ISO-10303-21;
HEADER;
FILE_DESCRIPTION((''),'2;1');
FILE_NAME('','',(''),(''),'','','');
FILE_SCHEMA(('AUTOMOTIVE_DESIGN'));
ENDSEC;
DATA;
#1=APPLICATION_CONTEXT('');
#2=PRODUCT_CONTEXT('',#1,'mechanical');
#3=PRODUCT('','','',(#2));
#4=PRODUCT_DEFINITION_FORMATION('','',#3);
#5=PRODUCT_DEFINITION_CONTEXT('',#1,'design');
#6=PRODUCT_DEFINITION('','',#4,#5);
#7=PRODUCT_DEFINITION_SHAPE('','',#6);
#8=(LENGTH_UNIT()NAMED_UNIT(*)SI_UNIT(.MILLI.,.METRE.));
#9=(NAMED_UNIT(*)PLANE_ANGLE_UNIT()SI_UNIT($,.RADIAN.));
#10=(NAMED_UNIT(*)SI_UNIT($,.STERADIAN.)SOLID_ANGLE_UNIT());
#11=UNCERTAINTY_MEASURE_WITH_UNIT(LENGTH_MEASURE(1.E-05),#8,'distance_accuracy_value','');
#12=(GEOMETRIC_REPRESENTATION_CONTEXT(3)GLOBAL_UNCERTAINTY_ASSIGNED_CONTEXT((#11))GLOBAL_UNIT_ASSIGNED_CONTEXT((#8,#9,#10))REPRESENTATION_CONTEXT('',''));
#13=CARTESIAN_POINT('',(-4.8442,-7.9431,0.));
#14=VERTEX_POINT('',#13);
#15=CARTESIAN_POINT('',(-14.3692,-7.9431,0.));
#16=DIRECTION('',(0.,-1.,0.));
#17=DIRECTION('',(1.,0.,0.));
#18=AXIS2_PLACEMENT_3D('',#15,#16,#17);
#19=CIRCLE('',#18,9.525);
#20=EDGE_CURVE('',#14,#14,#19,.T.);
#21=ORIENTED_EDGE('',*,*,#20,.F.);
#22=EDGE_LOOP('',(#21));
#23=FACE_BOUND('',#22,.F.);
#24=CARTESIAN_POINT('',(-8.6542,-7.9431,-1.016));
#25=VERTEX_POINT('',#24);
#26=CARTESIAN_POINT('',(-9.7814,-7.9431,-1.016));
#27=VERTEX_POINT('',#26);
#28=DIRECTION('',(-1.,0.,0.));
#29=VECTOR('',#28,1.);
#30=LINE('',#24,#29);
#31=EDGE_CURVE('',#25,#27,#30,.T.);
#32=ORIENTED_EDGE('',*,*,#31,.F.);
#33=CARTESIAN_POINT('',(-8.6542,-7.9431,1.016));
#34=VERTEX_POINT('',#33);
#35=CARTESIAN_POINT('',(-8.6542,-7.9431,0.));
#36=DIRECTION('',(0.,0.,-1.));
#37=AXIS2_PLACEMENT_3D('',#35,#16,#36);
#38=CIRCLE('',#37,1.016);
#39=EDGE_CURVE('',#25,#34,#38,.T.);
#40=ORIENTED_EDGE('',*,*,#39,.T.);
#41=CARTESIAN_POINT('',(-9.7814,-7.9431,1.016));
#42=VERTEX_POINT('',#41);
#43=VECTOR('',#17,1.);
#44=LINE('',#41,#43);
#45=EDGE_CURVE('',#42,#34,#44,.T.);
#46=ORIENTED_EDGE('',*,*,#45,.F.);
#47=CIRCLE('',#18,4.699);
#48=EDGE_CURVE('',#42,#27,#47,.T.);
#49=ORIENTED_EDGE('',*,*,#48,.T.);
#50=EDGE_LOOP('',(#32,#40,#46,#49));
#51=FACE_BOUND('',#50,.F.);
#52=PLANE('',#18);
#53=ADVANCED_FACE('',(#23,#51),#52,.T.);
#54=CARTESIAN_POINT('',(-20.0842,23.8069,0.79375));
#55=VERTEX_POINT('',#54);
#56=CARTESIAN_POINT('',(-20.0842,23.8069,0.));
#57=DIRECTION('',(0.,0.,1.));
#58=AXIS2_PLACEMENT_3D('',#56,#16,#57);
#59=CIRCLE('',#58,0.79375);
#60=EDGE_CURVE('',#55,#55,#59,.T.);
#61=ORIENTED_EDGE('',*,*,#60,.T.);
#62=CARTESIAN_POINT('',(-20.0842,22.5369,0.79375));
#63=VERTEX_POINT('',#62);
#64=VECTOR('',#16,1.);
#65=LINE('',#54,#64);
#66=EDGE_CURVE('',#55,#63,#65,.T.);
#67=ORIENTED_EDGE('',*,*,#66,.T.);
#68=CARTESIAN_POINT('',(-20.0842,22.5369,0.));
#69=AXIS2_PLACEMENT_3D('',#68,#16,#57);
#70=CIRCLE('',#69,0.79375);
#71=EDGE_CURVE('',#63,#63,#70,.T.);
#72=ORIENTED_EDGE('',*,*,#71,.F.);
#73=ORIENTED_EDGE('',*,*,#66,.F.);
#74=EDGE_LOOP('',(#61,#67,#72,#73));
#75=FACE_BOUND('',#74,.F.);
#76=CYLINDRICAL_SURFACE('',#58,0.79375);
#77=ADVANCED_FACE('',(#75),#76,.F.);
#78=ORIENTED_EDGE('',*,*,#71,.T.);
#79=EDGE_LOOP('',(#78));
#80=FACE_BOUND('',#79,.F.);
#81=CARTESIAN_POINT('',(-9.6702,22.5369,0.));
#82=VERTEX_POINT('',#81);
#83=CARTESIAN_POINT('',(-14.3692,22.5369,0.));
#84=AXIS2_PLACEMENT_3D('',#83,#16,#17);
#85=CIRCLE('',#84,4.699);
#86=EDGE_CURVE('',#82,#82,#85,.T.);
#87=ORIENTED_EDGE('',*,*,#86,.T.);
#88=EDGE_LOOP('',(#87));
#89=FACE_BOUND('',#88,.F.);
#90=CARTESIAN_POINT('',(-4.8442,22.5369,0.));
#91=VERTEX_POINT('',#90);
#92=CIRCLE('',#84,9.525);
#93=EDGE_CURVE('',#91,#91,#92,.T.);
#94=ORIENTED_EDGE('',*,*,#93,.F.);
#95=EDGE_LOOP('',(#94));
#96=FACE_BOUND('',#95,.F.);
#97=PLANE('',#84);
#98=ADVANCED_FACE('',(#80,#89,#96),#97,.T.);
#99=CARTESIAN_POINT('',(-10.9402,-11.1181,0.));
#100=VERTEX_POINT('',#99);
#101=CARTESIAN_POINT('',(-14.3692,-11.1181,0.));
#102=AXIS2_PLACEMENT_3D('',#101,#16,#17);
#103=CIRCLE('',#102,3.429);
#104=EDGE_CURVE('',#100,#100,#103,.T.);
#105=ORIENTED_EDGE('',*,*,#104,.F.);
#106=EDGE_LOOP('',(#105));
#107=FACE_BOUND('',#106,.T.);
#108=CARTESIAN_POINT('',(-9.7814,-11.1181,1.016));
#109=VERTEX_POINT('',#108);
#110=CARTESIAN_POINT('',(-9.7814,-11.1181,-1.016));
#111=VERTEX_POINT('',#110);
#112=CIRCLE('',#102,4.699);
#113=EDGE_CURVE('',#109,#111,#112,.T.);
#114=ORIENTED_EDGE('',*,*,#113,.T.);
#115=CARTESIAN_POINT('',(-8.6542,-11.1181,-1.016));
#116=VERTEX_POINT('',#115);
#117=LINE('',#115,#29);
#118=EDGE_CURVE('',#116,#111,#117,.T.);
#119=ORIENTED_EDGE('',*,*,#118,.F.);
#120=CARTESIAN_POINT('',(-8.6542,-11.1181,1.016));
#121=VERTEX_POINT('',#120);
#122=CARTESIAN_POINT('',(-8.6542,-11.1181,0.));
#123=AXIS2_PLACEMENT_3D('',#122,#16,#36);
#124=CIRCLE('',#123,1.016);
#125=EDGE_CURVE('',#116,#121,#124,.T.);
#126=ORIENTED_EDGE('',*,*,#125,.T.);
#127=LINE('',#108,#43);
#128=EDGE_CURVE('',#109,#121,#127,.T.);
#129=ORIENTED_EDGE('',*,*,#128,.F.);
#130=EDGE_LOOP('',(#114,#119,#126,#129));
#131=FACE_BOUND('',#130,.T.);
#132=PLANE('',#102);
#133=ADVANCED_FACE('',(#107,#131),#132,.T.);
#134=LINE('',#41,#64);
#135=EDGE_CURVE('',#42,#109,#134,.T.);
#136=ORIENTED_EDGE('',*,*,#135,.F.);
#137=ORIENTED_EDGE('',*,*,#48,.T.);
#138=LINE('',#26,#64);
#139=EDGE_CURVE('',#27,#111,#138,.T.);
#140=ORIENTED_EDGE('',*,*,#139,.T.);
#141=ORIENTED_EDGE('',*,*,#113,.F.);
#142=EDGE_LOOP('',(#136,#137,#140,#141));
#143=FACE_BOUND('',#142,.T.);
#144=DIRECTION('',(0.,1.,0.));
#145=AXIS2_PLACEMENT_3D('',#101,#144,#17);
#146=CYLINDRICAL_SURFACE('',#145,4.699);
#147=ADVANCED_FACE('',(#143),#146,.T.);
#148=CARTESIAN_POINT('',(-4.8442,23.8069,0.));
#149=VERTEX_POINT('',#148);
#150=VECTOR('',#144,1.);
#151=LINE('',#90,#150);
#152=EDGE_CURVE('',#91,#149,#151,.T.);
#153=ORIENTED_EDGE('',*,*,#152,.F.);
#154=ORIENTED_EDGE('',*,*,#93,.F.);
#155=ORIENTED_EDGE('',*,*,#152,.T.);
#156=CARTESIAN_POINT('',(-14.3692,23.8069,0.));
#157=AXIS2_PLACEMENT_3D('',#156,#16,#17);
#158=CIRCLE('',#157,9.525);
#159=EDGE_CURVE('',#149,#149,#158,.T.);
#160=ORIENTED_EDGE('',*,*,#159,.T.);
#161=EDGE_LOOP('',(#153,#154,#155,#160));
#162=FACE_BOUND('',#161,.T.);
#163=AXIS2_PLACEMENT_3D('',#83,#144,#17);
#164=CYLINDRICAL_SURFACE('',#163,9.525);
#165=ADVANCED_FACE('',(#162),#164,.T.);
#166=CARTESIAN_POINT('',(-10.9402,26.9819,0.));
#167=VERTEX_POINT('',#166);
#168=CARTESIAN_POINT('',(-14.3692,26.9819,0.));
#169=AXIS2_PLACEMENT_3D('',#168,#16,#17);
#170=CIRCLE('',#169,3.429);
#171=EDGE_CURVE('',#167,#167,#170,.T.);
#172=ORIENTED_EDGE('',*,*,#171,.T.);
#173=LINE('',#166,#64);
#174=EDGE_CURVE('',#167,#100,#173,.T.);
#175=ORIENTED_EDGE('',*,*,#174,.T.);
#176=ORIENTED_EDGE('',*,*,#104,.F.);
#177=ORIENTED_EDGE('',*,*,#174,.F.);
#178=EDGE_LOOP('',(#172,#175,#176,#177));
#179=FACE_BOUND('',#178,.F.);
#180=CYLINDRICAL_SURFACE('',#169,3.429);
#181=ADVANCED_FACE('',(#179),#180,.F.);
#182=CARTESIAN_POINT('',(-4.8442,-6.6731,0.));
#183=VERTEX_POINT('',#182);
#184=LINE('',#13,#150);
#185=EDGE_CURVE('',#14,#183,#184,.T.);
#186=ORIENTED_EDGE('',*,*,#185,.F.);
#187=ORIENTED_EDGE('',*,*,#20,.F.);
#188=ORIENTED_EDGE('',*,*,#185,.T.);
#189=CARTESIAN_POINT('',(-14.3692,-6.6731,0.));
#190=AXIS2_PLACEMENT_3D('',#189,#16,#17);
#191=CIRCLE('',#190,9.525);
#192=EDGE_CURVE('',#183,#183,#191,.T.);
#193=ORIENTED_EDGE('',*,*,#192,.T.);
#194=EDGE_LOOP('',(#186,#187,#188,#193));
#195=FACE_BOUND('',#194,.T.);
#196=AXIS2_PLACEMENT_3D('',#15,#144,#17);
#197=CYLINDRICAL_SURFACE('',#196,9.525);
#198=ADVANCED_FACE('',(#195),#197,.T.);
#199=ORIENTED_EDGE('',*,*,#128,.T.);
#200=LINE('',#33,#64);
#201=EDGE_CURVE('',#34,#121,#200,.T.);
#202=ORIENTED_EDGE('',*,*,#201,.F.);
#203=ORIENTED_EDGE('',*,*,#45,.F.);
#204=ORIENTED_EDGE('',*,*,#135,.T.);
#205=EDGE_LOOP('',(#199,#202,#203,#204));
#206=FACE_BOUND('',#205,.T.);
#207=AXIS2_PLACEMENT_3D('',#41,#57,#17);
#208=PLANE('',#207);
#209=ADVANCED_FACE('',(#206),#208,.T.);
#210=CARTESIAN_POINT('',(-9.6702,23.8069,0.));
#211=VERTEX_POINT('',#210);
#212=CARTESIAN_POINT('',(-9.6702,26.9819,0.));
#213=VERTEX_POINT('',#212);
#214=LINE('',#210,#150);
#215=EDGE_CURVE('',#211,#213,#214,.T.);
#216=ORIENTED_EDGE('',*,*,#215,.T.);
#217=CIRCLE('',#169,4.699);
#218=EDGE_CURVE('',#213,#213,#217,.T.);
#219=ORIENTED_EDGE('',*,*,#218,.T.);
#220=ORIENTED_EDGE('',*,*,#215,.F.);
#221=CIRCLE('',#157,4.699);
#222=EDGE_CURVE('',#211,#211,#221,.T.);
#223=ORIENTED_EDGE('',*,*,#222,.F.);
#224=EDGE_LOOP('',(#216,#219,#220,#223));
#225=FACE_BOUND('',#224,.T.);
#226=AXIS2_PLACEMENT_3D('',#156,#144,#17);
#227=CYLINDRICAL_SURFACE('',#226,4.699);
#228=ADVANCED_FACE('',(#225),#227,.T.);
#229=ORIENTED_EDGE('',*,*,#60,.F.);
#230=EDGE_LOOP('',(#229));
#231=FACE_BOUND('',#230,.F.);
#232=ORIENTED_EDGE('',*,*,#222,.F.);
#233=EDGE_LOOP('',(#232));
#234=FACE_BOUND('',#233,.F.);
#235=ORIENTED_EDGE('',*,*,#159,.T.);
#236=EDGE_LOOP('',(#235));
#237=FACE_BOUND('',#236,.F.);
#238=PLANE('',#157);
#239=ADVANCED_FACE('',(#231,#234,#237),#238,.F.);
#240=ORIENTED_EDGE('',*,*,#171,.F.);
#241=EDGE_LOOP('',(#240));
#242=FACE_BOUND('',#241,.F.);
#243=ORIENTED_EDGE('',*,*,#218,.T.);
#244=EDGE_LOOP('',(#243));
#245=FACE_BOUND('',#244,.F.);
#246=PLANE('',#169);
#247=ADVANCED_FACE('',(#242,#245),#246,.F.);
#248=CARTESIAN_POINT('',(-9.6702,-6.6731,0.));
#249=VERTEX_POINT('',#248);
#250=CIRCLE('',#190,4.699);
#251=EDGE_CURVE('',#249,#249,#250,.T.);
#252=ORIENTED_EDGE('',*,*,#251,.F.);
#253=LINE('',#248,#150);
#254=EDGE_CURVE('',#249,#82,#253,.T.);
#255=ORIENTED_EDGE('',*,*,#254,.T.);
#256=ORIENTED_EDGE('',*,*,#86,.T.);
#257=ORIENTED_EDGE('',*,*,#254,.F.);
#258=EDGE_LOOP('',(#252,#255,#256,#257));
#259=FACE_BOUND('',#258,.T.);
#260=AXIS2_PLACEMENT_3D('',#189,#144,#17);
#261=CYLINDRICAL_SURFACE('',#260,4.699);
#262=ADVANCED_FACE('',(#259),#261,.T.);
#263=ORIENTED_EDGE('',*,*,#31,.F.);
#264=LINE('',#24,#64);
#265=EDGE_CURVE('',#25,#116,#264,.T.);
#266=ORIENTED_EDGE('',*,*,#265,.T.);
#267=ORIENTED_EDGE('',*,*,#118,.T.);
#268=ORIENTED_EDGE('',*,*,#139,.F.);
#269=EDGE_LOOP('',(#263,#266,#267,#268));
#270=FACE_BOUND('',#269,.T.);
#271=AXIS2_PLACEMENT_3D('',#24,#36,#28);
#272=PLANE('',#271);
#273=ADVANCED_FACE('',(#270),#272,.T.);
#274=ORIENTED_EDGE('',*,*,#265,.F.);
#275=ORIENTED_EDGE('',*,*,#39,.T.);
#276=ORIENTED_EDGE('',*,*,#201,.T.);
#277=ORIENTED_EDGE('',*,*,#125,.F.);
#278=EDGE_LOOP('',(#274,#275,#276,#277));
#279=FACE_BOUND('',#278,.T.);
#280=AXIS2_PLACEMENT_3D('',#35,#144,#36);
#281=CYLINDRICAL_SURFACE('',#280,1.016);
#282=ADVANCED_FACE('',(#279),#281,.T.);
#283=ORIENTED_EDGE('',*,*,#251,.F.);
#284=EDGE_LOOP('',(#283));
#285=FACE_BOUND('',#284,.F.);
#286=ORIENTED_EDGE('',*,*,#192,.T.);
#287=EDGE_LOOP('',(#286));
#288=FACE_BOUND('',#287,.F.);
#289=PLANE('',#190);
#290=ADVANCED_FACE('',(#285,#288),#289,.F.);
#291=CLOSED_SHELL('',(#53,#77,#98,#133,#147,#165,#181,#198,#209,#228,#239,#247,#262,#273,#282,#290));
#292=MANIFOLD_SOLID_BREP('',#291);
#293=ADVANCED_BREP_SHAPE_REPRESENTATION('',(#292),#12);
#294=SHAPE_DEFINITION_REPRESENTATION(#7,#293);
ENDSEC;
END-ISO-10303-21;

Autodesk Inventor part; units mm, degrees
ref_plane "YZ Plane" through (0, 0, 0) normal (1, 0, 0) x (0, 1, 0)
ref_plane "XZ Plane" through (0, 0, 0) normal (0, 1, 0) x (-1, 0, 0)
ref_plane "XY Plane" through (0, 0, 0) normal (0, 0, 1) x (1, 0, 0)
sketch "Sketch1" plane through (0, 0, 0) normal (0, 0, 1) x (1, 0, 0)
  line L0 (-10.9402, 26.9819) -> (-10.9402, -11.1181)
  line L1 (-10.9402, -11.1181) -> (-9.6702, -11.1181)
  line L2 (-9.6702, -11.1181) -> (-9.6702, -7.9431)
  line L3 (-9.6702, -7.9431) -> (-4.8442, -7.9431)
  line L4 (-4.8442, -7.9431) -> (-4.8442, -6.6731)
  line L5 (-4.8442, -6.6731) -> (-9.6702, -6.6731)
  line L6 (-9.6702, -6.6731) -> (-9.6702, 22.5369)
  line L7 (-9.6702, 22.5369) -> (-4.8442, 22.5369)
  line L8 (-4.8442, 22.5369) -> (-4.8442, 23.8069)
  line L9 (-4.8442, 23.8069) -> (-9.6702, 23.8069)
  line L10 (-9.6702, 23.8069) -> (-9.6702, 26.9819)
  line L11 (-9.6702, 26.9819) -> (-10.9402, 26.9819)
  line L12 (-14.3692, 26.9819) -> (-14.3692, -11.1181) construction
  dimension "d0" = 9.525
  dimension "d1" = 4.699
  dimension "d2" = 38.1
  dimension "d3" = 3.175
  dimension "d4" = 1.27
  dimension "d5" = 1.27
revolve "Revolution1" add sketch "Sketch1" angle 360 about axis through (-14.3692, 26.9819, 0) along (0, -1, 0)
sketch "Sketch2" plane through (-14.3692, 23.8069, 0) normal (0, 1, 0) x (1, 0, 0)
  circle A0 centre (0, 0) radius 9.525 projected
  point P0 (-5.715, 0)
  dimension "d18" = 5.715
hole "Hole1" at (-20.0842, 23.8069, 0) direction (0, -1, 0) diameter 1.5875 end up to surface
sketch "Sketch3" plane through (-14.3692, -7.9431, 0) normal (0, -1, 0) x (1, 0, 0)
  circle A0 centre (0, 0) radius 4.699 projected
  line L0 (4.5878, 1.016) -> (5.715, 1.016)
  arc A1 (5.715, -1.016) -> (5.715, 1.016) centre (5.715, 0) ccw
  line L1 (5.715, -1.016) -> (4.5878, -1.016)
  dimension "d26" = 2.032
  dimension "d27" = 5.715
extrude "Extrusion1" add sketch "Sketch3" along normal up to surface (3.175 mm away) contours A0 L0 A1 L1
properties part number "bobbin" material "Delrin, Black"
